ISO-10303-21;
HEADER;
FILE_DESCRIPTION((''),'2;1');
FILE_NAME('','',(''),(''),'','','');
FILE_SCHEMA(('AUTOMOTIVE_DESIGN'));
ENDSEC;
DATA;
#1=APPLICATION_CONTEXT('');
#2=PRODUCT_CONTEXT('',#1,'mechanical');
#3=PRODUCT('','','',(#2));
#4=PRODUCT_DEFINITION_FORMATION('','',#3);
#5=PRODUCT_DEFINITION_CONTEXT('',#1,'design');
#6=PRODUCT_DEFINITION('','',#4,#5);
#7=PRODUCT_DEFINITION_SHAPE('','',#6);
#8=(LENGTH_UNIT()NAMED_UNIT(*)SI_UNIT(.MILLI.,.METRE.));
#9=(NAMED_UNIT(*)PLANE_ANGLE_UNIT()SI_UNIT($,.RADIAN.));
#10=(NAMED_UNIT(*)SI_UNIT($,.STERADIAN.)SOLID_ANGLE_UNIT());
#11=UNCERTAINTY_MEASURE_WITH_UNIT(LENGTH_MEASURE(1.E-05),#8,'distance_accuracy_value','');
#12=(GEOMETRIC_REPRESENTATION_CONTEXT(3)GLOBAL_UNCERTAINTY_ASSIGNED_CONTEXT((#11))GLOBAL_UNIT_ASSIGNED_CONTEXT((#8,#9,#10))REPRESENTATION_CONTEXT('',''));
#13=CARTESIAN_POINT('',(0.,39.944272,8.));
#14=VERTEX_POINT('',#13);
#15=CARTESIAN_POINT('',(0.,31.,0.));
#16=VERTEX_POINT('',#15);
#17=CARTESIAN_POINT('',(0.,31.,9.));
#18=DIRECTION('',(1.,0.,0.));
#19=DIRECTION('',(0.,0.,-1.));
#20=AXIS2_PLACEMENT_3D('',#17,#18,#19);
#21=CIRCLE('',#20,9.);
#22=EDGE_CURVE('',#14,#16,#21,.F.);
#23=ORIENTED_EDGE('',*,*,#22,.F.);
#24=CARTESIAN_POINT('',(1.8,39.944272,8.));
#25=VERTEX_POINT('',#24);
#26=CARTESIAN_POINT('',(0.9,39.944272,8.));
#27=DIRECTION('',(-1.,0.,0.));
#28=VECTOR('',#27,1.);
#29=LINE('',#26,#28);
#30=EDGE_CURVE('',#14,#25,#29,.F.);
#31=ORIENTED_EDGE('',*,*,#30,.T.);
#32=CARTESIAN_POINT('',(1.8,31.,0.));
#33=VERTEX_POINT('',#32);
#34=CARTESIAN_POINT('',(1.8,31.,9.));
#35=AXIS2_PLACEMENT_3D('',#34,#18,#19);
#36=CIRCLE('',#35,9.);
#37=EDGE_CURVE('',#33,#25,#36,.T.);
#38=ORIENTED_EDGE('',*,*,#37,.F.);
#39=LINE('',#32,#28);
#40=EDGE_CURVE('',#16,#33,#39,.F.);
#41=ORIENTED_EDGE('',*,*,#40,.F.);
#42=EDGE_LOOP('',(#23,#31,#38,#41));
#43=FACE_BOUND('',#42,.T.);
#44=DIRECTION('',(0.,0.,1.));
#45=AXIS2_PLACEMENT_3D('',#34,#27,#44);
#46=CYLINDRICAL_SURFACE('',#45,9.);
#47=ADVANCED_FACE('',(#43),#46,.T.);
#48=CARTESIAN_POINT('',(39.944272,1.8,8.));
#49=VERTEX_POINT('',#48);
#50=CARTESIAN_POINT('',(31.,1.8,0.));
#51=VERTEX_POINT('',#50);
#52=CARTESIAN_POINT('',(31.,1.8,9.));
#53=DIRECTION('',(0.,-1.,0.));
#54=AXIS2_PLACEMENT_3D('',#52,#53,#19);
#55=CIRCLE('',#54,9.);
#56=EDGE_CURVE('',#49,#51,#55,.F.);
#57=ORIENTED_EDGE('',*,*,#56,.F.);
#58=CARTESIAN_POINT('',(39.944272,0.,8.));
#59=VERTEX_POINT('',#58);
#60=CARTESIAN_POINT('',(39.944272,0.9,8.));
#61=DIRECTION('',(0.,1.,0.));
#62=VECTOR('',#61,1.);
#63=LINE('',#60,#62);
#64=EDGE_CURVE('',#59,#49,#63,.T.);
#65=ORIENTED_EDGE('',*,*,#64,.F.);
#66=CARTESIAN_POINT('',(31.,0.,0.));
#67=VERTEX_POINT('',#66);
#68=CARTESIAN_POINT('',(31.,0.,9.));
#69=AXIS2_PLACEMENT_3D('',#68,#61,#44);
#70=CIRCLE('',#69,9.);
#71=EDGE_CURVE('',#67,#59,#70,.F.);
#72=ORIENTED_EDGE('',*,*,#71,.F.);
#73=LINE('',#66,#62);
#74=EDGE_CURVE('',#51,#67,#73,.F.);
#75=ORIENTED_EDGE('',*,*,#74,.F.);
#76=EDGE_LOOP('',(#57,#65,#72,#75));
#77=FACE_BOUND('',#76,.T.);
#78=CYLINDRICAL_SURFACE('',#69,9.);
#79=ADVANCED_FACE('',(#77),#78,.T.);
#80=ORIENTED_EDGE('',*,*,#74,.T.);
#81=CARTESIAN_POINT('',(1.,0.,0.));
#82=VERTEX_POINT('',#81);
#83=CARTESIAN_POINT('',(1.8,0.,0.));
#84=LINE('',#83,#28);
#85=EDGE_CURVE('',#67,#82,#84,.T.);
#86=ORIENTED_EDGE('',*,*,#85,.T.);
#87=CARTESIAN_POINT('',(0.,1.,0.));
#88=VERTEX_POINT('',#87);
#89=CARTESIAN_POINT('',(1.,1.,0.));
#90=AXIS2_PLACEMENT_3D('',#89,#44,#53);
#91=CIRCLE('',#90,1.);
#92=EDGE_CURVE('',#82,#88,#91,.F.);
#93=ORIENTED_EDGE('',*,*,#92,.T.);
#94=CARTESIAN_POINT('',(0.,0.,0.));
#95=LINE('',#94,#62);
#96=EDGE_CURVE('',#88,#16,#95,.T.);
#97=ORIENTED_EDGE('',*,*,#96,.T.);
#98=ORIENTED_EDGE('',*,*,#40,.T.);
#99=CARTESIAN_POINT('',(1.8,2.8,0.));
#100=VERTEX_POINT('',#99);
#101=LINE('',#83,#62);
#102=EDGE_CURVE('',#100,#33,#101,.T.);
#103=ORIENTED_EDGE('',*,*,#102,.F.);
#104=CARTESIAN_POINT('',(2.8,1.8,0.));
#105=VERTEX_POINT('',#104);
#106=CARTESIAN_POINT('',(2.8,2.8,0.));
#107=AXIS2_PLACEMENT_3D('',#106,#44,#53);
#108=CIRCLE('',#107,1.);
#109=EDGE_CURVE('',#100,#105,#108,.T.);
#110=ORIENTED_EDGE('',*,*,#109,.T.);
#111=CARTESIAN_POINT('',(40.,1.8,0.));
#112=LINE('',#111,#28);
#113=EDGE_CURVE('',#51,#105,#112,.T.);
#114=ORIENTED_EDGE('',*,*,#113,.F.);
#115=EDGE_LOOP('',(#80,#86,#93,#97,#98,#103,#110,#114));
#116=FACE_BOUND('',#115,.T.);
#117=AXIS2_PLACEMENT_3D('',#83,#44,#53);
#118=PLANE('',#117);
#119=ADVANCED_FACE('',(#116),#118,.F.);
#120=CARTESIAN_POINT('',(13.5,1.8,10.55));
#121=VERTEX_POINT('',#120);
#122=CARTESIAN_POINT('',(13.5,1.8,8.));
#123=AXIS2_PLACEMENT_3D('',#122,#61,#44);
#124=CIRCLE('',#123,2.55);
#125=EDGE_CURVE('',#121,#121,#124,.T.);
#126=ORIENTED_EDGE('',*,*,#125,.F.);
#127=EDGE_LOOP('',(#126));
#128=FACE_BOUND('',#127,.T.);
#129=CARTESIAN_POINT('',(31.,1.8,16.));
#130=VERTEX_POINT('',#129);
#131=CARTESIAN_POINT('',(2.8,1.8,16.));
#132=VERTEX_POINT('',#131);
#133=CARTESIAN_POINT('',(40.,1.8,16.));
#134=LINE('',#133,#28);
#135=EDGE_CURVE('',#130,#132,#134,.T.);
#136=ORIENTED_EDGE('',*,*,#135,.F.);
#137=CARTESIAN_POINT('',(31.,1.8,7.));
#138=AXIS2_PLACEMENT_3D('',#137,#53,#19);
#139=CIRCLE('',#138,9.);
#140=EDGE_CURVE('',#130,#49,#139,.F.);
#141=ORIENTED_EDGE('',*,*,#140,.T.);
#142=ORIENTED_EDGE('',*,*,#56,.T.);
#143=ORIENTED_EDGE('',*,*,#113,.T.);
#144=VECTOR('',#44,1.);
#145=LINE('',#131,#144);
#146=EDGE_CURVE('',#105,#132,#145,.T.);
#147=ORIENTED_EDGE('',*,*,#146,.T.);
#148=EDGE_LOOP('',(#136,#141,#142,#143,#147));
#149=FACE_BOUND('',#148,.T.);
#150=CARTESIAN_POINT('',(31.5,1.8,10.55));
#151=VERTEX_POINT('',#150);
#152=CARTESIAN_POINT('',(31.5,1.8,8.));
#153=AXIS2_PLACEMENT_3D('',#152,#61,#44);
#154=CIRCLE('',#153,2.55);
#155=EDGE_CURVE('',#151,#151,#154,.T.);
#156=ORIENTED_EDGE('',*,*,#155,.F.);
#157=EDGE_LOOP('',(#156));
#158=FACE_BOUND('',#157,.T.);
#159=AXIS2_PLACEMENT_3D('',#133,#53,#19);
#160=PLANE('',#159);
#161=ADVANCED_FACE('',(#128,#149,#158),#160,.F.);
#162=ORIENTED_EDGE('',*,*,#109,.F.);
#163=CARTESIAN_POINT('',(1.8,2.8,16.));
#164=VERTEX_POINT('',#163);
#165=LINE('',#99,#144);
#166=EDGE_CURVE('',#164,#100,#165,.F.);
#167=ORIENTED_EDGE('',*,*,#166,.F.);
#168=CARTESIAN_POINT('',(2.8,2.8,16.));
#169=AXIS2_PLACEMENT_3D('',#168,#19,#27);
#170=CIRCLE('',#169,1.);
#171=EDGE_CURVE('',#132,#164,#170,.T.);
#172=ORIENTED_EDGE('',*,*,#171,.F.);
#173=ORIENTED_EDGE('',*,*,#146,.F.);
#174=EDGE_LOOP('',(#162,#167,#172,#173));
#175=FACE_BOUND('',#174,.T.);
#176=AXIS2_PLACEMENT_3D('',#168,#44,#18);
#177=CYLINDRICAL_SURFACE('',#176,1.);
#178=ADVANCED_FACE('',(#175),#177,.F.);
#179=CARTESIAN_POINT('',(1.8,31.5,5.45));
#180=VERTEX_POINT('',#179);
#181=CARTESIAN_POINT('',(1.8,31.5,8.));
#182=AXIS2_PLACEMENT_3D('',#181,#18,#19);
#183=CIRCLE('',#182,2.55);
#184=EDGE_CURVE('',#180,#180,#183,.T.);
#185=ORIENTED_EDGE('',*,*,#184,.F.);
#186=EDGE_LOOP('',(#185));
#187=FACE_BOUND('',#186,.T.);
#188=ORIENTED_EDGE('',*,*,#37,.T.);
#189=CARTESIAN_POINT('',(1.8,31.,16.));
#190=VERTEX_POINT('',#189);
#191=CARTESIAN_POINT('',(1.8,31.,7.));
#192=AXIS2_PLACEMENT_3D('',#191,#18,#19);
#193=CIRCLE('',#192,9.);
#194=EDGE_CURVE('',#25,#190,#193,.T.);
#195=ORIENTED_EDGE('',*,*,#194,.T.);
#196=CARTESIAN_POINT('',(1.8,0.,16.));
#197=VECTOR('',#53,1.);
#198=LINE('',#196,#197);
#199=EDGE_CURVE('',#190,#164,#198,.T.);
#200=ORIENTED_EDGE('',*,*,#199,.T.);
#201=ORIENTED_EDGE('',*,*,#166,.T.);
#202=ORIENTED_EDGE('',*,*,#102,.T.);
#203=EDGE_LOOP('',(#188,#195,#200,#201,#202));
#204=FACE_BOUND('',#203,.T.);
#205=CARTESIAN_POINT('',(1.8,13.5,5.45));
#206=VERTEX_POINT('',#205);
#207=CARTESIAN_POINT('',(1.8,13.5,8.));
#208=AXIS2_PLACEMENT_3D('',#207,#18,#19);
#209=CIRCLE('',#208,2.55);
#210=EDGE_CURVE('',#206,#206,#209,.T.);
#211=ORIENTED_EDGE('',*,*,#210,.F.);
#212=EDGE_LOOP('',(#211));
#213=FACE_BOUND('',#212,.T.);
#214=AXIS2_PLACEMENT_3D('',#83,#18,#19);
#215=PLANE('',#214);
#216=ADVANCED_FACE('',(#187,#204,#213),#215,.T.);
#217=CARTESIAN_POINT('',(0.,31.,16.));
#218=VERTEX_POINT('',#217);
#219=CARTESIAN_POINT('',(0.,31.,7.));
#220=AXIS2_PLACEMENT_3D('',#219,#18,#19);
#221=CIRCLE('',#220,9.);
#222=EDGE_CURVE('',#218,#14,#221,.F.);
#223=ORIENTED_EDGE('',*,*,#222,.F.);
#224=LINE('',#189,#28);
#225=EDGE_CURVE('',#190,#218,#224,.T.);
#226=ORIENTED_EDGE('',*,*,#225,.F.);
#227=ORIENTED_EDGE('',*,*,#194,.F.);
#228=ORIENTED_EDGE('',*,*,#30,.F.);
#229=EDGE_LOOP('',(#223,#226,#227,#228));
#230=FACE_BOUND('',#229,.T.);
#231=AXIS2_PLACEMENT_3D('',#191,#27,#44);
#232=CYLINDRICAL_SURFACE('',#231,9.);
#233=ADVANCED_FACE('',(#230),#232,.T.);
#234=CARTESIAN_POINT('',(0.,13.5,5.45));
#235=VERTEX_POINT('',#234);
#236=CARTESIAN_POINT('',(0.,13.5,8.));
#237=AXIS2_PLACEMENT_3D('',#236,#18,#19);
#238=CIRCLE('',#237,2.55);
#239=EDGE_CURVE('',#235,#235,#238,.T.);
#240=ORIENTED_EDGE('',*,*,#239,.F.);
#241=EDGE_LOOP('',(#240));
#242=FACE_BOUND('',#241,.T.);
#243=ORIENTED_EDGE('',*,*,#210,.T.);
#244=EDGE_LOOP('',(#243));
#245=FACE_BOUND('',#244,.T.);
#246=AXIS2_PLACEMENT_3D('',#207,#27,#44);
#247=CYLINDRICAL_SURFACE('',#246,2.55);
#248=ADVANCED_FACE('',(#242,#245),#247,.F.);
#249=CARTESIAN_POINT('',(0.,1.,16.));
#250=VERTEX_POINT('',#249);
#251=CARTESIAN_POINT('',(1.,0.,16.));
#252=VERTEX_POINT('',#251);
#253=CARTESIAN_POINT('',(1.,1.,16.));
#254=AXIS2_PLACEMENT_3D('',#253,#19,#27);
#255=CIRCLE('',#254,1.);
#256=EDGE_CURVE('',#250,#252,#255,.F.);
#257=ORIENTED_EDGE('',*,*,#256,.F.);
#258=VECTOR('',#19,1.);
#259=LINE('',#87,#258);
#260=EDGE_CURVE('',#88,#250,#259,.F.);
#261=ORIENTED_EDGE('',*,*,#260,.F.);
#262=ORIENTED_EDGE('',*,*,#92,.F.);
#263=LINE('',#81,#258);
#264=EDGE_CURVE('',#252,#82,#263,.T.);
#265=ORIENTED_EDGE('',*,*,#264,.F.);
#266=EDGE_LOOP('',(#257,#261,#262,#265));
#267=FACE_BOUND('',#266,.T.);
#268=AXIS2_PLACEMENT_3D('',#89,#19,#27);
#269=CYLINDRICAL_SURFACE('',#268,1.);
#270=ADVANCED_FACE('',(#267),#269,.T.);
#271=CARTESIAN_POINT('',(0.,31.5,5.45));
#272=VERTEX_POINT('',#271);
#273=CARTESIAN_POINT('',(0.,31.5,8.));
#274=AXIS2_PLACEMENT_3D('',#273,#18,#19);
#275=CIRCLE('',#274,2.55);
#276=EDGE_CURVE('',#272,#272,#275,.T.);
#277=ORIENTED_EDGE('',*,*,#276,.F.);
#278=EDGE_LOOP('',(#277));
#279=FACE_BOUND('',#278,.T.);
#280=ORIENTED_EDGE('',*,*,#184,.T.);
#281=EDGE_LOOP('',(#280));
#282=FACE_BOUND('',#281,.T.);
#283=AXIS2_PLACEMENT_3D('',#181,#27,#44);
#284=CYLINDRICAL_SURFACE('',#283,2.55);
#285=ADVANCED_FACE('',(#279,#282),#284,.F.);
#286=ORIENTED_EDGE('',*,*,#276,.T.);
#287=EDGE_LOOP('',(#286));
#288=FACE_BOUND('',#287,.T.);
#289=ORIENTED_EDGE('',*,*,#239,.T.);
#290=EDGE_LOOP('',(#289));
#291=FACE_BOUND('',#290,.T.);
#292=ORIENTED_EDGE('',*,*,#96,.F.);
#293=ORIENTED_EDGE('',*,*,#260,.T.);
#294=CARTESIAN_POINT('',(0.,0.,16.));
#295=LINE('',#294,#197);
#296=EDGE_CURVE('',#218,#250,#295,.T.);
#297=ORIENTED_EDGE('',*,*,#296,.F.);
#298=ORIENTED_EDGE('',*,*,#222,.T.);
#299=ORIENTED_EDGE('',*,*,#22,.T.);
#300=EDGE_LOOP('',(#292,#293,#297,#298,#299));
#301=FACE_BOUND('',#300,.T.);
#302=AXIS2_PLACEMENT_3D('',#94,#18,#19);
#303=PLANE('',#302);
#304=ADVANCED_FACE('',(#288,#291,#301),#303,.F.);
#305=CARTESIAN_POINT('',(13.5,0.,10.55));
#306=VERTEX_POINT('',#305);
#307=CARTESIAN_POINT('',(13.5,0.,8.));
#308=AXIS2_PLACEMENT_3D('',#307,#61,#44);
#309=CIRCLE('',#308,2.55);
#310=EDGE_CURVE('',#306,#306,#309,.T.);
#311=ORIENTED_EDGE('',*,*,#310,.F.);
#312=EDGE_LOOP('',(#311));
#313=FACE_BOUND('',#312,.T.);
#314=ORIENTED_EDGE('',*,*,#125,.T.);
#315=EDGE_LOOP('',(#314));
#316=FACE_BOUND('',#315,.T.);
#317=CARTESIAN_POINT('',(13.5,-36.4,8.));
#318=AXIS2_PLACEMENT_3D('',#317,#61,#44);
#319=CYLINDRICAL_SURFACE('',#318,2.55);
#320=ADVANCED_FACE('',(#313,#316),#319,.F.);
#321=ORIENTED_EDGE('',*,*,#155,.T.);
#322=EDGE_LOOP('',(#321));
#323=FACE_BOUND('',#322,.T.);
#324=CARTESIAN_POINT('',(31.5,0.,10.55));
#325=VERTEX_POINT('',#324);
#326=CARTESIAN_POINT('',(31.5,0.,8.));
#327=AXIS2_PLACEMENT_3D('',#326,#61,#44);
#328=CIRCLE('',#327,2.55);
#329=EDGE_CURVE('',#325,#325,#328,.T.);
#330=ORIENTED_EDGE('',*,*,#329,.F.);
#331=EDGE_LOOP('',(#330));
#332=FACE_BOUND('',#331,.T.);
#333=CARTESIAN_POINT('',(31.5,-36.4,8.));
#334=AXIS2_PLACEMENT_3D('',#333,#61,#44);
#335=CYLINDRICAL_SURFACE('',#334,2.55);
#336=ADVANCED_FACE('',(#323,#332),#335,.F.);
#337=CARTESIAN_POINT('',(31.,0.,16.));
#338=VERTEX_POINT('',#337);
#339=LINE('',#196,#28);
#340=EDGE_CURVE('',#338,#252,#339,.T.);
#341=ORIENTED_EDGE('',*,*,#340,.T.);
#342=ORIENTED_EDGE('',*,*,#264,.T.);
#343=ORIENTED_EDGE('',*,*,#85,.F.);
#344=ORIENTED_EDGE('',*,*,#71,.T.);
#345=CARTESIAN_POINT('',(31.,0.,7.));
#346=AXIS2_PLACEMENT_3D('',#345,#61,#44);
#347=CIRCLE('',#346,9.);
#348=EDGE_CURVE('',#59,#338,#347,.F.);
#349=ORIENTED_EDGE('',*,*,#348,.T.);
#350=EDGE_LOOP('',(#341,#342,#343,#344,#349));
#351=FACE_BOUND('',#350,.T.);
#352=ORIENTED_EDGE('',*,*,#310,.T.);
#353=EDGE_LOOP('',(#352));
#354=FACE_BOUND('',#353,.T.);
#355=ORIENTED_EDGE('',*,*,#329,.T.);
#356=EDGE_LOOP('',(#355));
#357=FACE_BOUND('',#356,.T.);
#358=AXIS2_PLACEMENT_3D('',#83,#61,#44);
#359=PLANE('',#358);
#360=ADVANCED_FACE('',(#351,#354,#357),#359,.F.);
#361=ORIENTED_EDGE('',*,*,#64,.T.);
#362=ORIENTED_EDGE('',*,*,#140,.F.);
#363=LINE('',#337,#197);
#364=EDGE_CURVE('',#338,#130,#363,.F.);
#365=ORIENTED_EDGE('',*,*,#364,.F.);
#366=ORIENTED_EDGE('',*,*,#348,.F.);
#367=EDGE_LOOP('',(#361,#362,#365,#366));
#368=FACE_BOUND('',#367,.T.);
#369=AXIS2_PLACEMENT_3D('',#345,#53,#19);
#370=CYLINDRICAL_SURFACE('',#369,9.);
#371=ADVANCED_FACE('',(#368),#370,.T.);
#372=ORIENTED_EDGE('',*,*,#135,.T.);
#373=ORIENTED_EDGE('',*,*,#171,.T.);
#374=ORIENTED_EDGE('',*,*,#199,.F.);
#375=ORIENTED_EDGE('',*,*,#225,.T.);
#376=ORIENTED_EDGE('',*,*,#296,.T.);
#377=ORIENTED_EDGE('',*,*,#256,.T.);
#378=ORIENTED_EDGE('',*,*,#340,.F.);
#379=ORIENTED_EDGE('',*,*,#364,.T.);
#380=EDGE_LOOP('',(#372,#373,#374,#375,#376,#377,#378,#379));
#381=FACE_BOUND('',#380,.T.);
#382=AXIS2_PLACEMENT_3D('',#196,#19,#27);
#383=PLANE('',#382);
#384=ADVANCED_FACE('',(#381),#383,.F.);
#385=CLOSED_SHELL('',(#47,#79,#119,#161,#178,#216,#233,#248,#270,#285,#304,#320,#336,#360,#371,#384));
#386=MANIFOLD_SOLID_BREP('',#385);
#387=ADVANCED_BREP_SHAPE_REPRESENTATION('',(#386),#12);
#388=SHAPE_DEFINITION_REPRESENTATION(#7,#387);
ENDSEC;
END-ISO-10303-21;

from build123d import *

# Parameters (mm, degrees)
CROQUIS1_W              = 16
CROQUIS1_H              = 40
CROQUIS1_R              = 2.55
SALIENTE_EXTRUIR1_DEPTH = 1.8
CROQUIS2_W              = 16
CROQUIS2_H              = 1.8
SALIENTE_EXTRUIR2_DEPTH = 38.2
CROQUIS3_R              = 2.55
CORTAR_EXTRUIR1_DEPTH   = 38.2
REDONDEO1_R             = 1
REDONDEO2_R             = 9
REDONDEO3_R             = 1


with BuildPart() as part:
    # Croquis1 → Saliente-Extruir1 (new body)
    with BuildSketch(Plane(origin=(0, 0, 0), x_dir=(0, 0, -1), z_dir=(1, 0, 0))):
        with Locations((-8, 20)):
            Rectangle(CROQUIS1_W, CROQUIS1_H)
        with Locations((-8, 31.5)):
            Circle(CROQUIS1_R, mode=Mode.SUBTRACT)
        with Locations((-8, 13.5)):
            Circle(CROQUIS1_R, mode=Mode.SUBTRACT)
    extrude(amount=SALIENTE_EXTRUIR1_DEPTH)

    # Croquis2 → Saliente-Extruir2 (add)
    with BuildSketch(Plane(origin=(1.8, 0, 0), x_dir=(0, 0, -1), z_dir=(1, 0, 0))):
        with Locations((-8, 0.9)):
            Rectangle(CROQUIS2_W, CROQUIS2_H)
    extrude(amount=SALIENTE_EXTRUIR2_DEPTH)

    # Croquis3 → Cortar-Extruir1 (cut)
    with BuildSketch(Plane(origin=(0, 1.8, 0), x_dir=(1, 0, 0), z_dir=(0, 1, 0))):
        with Locations(Location((31.5, -8, 0), (0, 0, 270))):
            Circle(CROQUIS3_R)
        with Locations(Location((13.5, -8, 0), (0, 0, 270))):
            Circle(CROQUIS3_R)
    extrude(amount=-CORTAR_EXTRUIR1_DEPTH, mode=Mode.SUBTRACT)

    # Redondeo1
    redondeo1_edges = [part.edges().sort_by_distance(p)[0] for p in [
        (1.8, 1.8, 8),
    ]]
    fillet(redondeo1_edges, radius=REDONDEO1_R)

    # Redondeo2
    # the kernel refuses this fillet: 9 mm, written as the material it takes off along each edge
    with BuildSketch(Plane(origin=(40, 24.3, 16), x_dir=(0, 0, -1), z_dir=(0, -1, 0)), Plane(origin=(-22.5, 40, 0), x_dir=(0, -1, 0), z_dir=(1, 0, 0)), Plane(origin=(-22.5, 40, 16), x_dir=(0, 0, -1), z_dir=(1, 0, 0))) as redondeo2_piece_1:
        with BuildLine():
            CenterArc((REDONDEO2_R, -REDONDEO2_R), REDONDEO2_R, 90, 90)
            Line((0, -REDONDEO2_R), (0, 0))
            Line((0, 0), (REDONDEO2_R, 0))
        make_face()
    extrude(amount=46.8, mode=Mode.SUBTRACT)
    with BuildSketch(Plane(origin=(40, -22.5, 0), x_dir=(-1, 0, 0), z_dir=(0, 1, 0))) as redondeo2_piece_2:
        with BuildLine():
            CenterArc((REDONDEO2_R, REDONDEO2_R), REDONDEO2_R, 180, 90)
            Line((0, REDONDEO2_R), (0, 0))
            Line((0, 0), (REDONDEO2_R, 0))
        make_face()
    extrude(amount=46.8, mode=Mode.SUBTRACT)

    # Redondeo3
    redondeo3_edges = [part.edges().sort_by_distance(p)[0] for p in [
        (0, 0, 8),
    ]]
    fillet(redondeo3_edges, radius=REDONDEO3_R)


solid = part.part
